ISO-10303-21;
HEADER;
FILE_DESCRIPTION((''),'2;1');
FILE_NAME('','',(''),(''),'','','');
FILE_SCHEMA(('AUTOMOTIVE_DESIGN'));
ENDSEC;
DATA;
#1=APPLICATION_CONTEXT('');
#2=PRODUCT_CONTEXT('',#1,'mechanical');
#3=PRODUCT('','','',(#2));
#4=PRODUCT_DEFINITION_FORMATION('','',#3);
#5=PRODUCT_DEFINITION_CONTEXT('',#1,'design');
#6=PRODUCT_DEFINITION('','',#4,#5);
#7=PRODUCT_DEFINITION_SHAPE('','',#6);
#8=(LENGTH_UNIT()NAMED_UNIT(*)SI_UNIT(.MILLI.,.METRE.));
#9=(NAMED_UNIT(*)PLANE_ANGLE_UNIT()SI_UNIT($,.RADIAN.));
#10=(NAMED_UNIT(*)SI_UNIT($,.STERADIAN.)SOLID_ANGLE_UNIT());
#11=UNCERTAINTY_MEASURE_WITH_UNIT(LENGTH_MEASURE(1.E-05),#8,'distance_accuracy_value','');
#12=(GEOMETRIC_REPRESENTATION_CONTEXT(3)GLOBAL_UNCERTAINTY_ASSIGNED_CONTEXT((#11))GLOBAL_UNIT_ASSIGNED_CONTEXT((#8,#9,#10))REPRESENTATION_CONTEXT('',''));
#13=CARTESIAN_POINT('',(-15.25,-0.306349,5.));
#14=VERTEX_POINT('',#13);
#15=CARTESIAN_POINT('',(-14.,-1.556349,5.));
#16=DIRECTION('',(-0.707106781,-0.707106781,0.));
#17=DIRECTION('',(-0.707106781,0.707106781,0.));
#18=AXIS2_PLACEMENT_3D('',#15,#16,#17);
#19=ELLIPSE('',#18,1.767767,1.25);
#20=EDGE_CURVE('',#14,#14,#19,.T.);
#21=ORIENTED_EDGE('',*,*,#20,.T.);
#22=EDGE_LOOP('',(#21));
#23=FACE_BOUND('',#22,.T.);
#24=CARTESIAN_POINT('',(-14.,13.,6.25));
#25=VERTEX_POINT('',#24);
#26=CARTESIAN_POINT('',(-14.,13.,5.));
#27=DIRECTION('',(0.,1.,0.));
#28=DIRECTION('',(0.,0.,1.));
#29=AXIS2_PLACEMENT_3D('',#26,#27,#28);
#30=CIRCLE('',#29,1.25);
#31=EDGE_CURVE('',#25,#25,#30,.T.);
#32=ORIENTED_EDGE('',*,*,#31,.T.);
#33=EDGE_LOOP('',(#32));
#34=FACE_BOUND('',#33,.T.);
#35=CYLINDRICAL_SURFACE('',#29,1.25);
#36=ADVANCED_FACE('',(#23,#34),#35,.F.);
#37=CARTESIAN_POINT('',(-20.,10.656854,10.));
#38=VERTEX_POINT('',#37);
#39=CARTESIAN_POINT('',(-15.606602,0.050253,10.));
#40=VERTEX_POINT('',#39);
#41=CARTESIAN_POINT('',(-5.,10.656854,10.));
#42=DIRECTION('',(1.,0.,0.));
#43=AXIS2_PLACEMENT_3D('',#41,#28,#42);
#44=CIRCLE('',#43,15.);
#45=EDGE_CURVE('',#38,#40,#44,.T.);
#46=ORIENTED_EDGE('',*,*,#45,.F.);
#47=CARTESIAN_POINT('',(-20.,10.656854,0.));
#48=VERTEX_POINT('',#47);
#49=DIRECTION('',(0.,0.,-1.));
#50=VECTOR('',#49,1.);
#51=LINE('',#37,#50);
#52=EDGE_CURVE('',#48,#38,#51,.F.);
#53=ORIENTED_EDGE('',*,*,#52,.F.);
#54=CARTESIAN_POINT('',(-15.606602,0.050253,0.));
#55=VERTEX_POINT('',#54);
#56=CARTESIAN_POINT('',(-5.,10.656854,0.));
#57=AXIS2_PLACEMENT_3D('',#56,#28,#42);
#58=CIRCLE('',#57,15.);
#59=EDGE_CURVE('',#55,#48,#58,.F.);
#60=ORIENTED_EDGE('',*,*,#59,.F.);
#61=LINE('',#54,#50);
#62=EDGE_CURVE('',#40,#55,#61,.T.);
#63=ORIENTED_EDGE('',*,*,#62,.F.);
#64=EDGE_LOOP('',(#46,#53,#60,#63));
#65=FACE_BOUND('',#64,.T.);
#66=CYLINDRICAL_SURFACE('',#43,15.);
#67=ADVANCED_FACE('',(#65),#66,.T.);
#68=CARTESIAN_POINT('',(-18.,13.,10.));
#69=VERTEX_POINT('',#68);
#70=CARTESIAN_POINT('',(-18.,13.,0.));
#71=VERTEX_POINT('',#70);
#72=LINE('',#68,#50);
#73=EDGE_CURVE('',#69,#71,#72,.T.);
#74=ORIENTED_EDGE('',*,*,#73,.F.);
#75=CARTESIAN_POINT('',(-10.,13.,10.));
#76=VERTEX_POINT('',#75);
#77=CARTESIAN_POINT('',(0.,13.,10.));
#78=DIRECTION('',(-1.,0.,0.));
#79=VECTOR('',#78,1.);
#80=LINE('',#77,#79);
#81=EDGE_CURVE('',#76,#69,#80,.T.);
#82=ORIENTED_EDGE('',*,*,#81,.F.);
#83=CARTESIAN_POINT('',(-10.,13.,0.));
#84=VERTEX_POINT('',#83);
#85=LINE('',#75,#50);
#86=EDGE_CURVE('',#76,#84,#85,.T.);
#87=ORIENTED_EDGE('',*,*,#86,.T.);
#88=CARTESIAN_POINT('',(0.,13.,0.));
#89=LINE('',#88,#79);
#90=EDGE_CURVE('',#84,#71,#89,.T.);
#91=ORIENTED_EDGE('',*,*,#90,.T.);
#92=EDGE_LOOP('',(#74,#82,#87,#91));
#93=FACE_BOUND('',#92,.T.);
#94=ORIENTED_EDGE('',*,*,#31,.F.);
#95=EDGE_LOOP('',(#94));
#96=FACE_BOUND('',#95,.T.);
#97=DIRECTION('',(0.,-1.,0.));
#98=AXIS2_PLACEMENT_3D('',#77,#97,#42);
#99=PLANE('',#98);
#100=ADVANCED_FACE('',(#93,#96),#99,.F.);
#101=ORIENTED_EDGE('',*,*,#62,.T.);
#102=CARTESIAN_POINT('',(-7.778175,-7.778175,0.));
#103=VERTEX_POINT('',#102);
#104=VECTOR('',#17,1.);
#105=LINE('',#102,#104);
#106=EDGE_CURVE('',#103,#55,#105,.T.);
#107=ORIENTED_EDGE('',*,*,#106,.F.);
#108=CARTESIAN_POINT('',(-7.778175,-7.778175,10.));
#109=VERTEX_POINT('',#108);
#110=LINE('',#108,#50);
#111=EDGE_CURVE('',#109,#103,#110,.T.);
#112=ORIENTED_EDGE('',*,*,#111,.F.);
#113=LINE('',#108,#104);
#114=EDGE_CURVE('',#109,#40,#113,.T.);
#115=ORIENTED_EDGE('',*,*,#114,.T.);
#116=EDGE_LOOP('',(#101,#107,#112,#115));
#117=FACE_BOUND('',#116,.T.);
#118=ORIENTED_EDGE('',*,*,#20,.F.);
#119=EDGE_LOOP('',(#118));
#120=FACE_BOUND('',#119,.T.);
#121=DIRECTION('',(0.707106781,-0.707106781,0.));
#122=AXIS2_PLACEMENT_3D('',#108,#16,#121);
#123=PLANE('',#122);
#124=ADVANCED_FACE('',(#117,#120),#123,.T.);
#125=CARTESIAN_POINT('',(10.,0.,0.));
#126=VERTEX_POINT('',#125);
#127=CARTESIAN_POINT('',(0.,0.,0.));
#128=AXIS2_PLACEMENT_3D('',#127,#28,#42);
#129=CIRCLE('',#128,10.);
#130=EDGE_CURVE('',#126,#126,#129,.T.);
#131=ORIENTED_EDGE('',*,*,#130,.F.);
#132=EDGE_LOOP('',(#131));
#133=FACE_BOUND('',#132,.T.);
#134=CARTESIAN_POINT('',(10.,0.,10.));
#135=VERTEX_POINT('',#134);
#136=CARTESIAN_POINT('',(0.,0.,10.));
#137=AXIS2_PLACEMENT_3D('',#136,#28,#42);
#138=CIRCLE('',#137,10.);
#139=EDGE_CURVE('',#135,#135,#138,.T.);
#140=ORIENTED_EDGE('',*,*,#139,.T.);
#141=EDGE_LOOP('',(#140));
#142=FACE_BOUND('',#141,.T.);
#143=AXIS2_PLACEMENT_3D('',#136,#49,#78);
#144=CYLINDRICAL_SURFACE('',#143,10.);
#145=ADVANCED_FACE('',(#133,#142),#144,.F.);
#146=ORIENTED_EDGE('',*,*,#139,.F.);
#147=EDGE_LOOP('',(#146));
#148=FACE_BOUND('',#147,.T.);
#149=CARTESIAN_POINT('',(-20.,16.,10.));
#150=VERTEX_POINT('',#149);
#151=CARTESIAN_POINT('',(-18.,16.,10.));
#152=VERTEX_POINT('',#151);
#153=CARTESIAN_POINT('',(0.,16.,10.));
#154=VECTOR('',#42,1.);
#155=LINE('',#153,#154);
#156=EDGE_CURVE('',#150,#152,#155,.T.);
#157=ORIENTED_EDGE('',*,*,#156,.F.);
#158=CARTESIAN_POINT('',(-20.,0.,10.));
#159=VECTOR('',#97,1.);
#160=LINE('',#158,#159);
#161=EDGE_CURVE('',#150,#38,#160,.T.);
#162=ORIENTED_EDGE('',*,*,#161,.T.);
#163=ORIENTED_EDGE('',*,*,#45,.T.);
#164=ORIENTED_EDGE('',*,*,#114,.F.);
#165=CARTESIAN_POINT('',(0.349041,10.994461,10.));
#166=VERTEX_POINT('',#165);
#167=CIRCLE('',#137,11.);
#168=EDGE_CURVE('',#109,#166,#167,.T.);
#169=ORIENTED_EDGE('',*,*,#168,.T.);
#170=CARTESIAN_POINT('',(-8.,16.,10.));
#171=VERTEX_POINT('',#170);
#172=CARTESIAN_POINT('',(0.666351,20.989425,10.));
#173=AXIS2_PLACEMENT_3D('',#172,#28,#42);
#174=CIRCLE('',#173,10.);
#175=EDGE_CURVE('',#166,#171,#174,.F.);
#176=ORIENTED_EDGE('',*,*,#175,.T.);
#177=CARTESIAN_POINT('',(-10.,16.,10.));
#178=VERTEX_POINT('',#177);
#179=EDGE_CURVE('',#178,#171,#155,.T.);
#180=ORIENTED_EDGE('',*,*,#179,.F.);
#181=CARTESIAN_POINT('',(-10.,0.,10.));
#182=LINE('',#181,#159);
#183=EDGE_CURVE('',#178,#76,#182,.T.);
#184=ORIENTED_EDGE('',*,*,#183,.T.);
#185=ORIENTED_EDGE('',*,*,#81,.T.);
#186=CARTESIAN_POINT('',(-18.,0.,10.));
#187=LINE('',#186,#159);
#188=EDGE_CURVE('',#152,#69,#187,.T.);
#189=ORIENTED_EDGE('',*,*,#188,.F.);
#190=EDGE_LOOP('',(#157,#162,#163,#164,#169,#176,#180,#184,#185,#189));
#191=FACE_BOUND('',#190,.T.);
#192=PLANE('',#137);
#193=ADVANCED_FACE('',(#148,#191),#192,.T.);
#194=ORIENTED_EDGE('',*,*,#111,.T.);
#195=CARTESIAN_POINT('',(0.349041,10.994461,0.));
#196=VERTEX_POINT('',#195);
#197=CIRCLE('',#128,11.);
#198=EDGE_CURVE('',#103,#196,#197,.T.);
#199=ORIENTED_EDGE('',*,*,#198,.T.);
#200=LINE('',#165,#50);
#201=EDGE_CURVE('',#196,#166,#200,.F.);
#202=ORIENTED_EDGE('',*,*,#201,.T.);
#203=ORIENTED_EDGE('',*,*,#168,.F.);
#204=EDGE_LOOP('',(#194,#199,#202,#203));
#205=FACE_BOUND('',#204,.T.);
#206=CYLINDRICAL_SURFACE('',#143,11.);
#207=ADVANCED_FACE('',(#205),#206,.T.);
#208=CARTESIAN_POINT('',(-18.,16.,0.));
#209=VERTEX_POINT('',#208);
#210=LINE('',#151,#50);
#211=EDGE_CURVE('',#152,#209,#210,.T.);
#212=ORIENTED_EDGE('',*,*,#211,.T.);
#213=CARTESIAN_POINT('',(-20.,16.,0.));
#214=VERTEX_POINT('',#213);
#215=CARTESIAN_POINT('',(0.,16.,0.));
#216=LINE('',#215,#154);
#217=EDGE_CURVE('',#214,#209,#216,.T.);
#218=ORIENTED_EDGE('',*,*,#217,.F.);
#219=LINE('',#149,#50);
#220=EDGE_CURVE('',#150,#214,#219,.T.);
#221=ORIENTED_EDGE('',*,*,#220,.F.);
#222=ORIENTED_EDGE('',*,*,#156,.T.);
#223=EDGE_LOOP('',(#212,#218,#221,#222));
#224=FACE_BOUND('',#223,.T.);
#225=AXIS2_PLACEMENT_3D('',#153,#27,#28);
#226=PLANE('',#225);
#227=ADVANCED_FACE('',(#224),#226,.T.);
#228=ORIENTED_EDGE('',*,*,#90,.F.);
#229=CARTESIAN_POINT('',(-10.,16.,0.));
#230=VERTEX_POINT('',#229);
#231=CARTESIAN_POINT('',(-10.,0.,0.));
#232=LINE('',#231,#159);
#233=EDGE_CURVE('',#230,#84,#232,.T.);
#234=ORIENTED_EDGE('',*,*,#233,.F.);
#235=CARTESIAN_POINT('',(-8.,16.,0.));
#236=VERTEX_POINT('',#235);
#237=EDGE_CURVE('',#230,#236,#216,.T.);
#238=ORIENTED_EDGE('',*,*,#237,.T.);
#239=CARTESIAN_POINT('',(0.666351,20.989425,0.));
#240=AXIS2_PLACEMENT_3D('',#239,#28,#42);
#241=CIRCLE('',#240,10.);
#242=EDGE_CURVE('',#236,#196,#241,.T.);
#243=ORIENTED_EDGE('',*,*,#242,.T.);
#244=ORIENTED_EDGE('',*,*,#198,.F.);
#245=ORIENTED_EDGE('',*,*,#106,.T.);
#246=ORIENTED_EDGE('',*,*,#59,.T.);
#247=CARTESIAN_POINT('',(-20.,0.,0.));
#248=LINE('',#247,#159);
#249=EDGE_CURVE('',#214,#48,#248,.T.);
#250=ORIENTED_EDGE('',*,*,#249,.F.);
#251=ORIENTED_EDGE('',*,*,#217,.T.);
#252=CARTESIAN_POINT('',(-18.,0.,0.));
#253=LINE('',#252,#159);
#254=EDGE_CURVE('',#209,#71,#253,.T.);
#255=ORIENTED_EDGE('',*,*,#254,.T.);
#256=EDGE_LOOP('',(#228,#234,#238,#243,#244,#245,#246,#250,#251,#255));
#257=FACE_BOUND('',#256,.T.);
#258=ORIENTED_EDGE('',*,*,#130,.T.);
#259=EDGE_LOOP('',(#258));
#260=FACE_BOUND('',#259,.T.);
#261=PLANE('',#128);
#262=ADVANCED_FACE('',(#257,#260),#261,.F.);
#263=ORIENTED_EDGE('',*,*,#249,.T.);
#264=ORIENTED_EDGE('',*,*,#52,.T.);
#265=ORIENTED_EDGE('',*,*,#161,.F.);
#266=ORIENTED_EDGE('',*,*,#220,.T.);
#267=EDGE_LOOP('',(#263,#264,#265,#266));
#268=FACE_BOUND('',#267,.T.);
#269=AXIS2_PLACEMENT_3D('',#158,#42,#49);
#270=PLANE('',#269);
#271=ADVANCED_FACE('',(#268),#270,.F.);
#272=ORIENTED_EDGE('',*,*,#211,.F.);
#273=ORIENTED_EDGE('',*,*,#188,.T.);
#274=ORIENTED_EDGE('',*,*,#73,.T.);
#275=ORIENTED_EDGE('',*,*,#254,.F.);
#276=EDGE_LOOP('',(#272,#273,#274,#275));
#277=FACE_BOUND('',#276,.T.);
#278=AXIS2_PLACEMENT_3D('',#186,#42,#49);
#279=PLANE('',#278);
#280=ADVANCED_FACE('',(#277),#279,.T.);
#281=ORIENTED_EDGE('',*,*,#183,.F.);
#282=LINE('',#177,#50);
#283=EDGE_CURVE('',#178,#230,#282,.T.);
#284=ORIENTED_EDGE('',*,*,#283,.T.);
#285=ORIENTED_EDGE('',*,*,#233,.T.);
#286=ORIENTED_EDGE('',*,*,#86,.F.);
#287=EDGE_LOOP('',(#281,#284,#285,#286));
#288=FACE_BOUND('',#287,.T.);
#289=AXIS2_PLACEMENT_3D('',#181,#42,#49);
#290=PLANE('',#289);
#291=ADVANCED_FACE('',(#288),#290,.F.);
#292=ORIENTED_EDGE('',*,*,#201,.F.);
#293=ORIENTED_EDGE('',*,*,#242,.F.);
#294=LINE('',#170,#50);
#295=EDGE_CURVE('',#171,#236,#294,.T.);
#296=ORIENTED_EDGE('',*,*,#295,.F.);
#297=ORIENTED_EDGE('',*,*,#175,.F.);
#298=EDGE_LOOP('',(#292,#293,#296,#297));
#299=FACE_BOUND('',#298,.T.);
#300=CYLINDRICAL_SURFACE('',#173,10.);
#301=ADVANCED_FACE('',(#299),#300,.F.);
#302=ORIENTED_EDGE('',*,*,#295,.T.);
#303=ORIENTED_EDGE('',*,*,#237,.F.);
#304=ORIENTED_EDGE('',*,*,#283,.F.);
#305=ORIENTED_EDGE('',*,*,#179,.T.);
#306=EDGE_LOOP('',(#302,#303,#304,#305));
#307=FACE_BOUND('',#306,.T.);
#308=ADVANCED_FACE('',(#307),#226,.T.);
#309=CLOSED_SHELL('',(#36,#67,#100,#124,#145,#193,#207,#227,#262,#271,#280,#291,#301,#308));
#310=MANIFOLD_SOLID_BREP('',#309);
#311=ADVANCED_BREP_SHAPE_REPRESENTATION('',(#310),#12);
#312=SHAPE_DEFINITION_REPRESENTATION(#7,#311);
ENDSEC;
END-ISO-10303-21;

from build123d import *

# Parameters (mm, degrees)
SKETCH1_R           = 10
BOSS_EXTRUDE1_DEPTH = 10
FILLET1_R           = 10
M3_TAPPED_HOLE1_D   = 2.5
FILLET2_R           = 15


with BuildPart() as part:
    # Sketch1 → Boss-Extrude1 (new body)
    with BuildSketch(Plane.XY):
        with BuildLine():
            Line((-18, 16), (-20, 16))
            Line((-20, 16), (-20, 4.443650814))
            Line((-20, 4.443650814), (-7.778174593, -7.778174593))
            ThreePointArc((-7.778174593, -7.778174593), (10.998848284, 0.159174228), (-8, 7.549834435))
            Line((-8, 7.549834435), (-8, 16))
            Line((-8, 16), (-10, 16))
            Line((-10, 16), (-10, 13))
            Line((-10, 13), (-18, 13))
            Line((-18, 13), (-18, 16))
        make_face()
        Circle(SKETCH1_R, mode=Mode.SUBTRACT)
    extrude(amount=BOSS_EXTRUDE1_DEPTH)

    # Fillet1
    # the kernel refuses this fillet: 10 mm, written as the material it adds along each edge
    with BuildSketch(Plane(origin=(-8, 7.549834435, 0), x_dir=(0, 1, 0), z_dir=(0, 0, 1))) as fillet1_piece_1:
        with BuildLine():
            CenterArc((13.43959092, -8.66635071), FILLET1_R, 119.930063337, 58.25157985)
            Line((3.444626465, -8.349040848), (3.244727176, -8.342694651))
            ThreePointArc((3.244727176, -8.342694651), (2.433829653, -3.880964752), (-0.137269717, -0.145454545))
            Line((-0.137269717, -0.145454545), (0, 0.2))
            ThreePointArc((0, 0.2), (4.225082782, 0.2), (8.350377058, 0.173327014))
            Line((8.350377058, 0.173327014), (8.450165565, 0))
        make_face()
    extrude(amount=10)

    # M3 Tapped Hole1 (through all)
    with Locations(Plane(origin=(0, 13, 0), x_dir=(1, 0, 0), z_dir=(0, 1, 0))):
        with Locations((-14, -5)):
            Hole(M3_TAPPED_HOLE1_D / 2)

    # Fillet2
    fillet2_edges = [part.edges().sort_by_distance(p)[0] for p in [
        (-20, 4.443650814, 5),
    ]]
    fillet(fillet2_edges, radius=FILLET2_R)


solid = part.part
